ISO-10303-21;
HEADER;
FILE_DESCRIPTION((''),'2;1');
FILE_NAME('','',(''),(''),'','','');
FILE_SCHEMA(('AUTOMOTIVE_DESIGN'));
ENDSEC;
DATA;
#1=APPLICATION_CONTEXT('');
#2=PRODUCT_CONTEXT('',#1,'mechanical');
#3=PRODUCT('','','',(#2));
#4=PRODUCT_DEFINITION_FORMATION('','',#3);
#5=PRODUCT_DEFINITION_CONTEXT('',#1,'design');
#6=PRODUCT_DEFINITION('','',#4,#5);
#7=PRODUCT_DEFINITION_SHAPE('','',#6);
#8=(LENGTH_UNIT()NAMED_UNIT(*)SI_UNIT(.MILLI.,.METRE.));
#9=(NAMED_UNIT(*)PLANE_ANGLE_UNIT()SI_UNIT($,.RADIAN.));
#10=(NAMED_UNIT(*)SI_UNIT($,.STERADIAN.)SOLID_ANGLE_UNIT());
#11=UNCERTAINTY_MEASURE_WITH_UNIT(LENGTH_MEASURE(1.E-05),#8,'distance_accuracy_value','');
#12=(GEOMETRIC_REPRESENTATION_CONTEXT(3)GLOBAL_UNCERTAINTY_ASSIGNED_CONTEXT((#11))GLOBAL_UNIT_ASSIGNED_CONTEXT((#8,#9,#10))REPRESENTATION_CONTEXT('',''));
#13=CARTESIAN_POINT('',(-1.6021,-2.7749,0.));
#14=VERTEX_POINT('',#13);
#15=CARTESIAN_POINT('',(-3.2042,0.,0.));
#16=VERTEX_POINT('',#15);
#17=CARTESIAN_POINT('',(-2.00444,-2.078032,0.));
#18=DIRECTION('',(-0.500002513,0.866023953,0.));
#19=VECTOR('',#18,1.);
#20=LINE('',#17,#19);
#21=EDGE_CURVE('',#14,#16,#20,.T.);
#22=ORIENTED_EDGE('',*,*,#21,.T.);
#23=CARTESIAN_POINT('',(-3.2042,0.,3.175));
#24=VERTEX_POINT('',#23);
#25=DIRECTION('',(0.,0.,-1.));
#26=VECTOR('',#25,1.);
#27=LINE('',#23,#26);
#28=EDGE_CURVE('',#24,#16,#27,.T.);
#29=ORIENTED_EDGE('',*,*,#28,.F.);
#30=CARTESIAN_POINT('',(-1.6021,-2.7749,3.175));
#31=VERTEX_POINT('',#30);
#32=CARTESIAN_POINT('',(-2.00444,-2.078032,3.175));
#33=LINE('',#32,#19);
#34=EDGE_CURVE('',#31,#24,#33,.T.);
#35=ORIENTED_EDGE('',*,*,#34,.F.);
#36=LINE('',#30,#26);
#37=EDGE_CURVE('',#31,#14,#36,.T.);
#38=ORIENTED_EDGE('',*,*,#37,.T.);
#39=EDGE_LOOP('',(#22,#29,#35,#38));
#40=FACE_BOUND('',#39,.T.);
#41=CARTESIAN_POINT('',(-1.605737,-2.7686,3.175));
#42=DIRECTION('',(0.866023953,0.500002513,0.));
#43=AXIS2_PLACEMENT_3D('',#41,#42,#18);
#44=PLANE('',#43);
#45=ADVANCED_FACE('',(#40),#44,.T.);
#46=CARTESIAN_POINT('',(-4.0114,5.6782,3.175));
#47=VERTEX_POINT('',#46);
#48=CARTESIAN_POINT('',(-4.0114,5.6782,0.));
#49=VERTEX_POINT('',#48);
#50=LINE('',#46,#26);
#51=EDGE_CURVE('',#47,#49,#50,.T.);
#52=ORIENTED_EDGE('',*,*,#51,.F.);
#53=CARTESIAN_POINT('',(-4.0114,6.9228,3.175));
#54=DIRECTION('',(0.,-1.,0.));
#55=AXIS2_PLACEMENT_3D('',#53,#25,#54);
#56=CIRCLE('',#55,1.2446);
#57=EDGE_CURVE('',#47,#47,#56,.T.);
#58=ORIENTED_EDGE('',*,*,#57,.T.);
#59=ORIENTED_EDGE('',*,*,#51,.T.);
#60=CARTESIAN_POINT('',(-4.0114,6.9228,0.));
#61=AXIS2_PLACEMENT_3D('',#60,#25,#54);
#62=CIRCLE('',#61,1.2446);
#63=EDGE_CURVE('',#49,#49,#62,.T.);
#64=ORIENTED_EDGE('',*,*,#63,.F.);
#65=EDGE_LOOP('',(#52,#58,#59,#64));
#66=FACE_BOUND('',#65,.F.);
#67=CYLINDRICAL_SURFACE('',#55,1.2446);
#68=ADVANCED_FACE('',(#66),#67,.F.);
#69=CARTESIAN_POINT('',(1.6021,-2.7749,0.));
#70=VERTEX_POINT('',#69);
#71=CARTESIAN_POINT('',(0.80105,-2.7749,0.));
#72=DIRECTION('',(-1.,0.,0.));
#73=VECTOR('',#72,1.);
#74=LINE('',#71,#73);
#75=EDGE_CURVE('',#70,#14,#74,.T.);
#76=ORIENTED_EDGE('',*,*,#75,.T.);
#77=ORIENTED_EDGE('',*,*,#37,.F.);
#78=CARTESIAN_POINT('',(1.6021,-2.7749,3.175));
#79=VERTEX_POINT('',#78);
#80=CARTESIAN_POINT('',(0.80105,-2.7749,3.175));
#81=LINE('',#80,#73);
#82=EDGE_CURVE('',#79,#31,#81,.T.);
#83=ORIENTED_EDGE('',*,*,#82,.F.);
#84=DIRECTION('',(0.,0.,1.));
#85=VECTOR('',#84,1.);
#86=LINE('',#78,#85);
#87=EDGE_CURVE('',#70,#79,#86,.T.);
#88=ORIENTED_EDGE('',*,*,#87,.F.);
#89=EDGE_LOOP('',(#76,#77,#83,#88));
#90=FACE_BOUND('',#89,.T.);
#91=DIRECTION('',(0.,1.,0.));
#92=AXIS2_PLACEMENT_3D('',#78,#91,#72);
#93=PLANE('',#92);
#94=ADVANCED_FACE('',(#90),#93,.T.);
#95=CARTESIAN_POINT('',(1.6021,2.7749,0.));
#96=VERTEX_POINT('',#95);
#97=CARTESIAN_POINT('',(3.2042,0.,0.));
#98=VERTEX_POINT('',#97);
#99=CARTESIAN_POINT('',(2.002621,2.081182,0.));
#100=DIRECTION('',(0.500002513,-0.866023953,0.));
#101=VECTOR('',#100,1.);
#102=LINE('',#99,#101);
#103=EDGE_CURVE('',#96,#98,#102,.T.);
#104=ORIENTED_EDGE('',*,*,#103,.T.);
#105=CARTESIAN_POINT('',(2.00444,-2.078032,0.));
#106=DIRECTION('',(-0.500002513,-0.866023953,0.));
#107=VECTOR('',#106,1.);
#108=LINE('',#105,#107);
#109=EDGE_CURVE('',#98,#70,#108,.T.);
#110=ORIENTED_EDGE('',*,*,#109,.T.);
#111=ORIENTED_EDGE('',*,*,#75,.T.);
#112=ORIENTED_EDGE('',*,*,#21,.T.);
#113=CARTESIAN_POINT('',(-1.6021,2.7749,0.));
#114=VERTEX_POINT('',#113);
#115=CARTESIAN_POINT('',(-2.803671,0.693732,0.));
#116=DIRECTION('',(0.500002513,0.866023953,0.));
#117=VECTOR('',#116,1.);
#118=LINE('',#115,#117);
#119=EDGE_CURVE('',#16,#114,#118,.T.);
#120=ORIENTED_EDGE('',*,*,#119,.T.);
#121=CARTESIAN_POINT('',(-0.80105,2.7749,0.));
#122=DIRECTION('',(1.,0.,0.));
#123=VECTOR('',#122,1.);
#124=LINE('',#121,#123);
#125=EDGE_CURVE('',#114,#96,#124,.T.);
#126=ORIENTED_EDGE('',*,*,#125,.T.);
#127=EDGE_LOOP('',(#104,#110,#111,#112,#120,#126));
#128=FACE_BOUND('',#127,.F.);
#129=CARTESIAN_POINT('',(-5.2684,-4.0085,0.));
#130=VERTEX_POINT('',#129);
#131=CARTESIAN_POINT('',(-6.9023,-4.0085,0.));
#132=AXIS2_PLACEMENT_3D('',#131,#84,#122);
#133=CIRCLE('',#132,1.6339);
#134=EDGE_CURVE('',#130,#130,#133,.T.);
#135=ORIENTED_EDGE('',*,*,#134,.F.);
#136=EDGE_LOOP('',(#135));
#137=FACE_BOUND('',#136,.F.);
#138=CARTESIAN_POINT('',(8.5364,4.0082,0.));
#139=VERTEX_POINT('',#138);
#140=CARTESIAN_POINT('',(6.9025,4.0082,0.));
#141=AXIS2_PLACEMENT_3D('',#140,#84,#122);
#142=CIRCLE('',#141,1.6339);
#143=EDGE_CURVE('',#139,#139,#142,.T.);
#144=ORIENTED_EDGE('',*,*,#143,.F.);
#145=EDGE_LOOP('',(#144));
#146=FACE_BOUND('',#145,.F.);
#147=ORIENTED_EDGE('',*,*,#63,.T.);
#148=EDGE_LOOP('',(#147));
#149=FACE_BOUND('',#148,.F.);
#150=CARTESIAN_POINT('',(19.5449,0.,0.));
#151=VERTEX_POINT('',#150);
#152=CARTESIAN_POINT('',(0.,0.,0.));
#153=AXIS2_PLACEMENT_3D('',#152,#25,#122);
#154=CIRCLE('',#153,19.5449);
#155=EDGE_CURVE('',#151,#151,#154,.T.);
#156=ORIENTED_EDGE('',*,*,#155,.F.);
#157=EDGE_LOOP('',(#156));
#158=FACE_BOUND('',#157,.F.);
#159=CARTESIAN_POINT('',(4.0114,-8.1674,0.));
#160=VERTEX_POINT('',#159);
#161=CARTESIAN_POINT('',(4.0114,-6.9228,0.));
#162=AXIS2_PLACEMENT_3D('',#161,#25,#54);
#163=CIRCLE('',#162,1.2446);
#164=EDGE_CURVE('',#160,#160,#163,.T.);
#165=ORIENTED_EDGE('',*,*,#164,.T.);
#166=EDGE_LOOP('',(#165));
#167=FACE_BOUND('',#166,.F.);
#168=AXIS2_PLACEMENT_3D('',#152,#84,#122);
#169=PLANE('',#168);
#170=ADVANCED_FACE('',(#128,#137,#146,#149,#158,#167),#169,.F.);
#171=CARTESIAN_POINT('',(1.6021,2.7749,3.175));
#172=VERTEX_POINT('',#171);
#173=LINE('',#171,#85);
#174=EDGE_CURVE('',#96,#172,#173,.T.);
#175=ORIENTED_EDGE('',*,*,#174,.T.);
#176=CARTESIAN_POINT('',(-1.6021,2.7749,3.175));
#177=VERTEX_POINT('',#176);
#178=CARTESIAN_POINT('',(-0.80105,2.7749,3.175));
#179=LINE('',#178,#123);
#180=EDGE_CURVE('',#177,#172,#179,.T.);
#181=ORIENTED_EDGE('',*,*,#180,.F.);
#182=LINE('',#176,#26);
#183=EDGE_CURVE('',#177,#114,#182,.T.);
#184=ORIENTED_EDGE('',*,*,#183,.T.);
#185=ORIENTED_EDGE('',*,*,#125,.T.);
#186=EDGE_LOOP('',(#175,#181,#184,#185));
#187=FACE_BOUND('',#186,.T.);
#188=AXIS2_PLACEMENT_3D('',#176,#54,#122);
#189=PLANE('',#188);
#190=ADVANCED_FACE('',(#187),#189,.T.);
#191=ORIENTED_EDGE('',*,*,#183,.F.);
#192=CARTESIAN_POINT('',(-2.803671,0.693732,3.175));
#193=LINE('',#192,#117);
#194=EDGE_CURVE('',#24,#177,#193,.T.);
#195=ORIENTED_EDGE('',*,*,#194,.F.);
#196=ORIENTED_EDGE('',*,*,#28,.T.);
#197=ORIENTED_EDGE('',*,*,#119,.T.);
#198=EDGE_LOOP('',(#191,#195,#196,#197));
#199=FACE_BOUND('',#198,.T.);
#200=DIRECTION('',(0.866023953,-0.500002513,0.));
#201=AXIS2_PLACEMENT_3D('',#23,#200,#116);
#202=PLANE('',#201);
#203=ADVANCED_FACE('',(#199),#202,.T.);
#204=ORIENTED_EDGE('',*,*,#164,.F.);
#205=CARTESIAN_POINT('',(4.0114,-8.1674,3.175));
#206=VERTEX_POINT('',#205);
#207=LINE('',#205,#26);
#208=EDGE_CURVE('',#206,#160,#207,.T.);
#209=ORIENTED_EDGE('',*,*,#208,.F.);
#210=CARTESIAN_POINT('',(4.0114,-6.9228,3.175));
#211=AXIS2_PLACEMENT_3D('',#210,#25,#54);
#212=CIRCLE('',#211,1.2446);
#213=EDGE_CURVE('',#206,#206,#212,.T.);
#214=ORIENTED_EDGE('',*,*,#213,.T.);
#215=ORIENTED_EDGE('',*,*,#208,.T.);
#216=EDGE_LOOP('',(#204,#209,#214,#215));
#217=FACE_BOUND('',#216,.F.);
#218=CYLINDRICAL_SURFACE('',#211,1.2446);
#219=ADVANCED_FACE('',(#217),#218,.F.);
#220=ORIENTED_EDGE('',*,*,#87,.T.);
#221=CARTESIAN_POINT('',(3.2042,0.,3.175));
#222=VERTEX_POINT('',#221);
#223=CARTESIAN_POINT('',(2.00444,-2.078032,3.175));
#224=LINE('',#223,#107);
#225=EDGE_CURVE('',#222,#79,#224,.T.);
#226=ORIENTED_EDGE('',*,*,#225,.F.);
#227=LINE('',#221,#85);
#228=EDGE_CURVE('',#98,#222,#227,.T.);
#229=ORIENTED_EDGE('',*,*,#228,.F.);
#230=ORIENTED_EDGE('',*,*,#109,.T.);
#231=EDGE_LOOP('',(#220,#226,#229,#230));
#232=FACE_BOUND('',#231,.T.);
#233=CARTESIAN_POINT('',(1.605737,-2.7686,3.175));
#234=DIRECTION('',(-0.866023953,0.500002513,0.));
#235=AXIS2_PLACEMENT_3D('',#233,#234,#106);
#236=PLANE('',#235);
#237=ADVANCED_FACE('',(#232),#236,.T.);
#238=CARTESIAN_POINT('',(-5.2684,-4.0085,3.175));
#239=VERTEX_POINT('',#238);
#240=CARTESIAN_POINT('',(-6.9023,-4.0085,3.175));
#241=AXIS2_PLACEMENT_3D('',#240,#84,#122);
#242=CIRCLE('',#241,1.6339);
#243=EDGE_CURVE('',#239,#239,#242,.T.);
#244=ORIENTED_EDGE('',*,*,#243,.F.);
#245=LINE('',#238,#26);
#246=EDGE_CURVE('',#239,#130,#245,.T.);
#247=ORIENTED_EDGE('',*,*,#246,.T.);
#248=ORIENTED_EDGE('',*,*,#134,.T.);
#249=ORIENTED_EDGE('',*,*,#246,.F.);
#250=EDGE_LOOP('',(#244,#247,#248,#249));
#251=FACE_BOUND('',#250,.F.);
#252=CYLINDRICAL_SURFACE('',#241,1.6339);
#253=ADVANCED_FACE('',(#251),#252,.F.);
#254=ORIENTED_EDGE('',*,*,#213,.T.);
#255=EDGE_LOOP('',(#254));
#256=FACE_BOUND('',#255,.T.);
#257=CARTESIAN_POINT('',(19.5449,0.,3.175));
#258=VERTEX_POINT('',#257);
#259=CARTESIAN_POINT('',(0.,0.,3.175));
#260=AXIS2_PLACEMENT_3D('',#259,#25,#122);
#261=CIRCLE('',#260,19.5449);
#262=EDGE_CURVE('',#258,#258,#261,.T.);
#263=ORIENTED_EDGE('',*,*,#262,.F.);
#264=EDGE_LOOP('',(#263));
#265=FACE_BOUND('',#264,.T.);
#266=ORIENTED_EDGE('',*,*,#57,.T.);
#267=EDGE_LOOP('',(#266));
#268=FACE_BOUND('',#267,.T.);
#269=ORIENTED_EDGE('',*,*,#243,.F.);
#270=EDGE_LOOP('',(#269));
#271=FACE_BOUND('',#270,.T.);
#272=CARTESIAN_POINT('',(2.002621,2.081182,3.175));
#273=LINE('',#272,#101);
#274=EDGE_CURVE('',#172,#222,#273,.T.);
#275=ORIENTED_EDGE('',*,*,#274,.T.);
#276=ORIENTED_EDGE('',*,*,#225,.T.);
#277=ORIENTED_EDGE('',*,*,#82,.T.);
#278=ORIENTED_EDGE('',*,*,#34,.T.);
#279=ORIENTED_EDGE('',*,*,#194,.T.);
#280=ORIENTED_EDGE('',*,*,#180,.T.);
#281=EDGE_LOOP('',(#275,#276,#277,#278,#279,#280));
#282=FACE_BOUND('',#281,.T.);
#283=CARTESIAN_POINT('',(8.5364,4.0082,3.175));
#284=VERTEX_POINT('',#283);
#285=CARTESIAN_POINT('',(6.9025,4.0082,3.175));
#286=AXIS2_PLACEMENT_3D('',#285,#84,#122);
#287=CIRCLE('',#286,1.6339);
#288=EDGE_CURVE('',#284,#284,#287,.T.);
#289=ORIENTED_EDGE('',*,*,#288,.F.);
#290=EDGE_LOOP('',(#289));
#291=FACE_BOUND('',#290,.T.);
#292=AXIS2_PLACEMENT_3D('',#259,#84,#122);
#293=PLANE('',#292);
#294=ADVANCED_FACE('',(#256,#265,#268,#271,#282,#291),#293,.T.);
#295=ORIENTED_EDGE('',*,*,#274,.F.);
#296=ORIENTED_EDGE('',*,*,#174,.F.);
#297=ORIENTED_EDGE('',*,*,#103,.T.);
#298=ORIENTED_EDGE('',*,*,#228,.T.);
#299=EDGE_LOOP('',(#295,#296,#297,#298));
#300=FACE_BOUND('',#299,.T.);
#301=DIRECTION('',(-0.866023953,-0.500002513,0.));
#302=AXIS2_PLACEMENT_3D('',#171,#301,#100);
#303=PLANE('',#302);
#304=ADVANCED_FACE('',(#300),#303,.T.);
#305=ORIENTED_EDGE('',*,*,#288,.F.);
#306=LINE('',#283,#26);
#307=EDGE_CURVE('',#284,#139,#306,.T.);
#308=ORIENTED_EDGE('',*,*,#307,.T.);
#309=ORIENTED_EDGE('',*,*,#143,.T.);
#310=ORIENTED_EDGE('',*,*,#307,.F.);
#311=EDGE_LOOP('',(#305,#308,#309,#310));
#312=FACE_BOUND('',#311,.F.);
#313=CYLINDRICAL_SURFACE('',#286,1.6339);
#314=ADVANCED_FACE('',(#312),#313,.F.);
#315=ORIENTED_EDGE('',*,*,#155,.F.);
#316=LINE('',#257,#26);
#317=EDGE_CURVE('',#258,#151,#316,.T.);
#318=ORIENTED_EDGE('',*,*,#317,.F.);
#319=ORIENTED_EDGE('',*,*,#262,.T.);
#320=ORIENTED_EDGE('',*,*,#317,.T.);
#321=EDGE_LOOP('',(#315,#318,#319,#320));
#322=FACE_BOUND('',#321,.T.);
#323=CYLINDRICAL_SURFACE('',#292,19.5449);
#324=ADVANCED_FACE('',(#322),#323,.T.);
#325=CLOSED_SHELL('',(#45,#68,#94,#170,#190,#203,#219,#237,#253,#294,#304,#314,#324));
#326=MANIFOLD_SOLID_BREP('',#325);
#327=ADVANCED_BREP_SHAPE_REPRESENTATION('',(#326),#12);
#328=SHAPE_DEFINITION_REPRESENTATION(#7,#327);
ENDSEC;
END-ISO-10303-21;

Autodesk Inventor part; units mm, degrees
ref_plane "YZ Plane" through (0, 0, 0) normal (1, 0, 0) x (0, 1, 0)
ref_plane "XZ Plane" through (0, 0, 0) normal (0, 1, 0) x (-1, 0, 0)
ref_plane "XY Plane" through (0, 0, 0) normal (0, 0, 1) x (1, 0, 0)
sketch "Sketch1" plane through (0, 0, 0) normal (0, 0, 1) x (1, 0, 0)
  circle A0 centre (0, 0) radius 27.6352
  dimension "d0" = 55.2704
extrude "Extrusion1" add sketch "Sketch1" along normal blind 3.175
sketch "Sketch2" plane through (0, 0, 3.175) normal (0, 0, 1) x (1, 0, 0)
  circle A0 centre (0, 0) radius 27.6352 projected
  line L0 (0, 27.6352) -> (0, 0)
  line L1 (0, 0) -> (23.9328, -13.8176)
  line L2 (0, 0) -> (-23.9328, -13.8176)
  line L3 (0, 0) -> (27.6352, 0) construction
  line L4 (0, 27.6352) -> (0, 19.4152)
  line L5 (0, 19.4152) -> (5.08, 19.4152)
  line L6 (0, 19.4152) -> (-5.08, 19.4152)
  arc A1 (5.08, 19.4152) -> (-5.08, 19.4152) centre (0, -5.5937) ccw
  line L7 (-5.08, 19.4152) -> (2.5298, 19.4152) construction
  line L8 (-5.08, 19.4152) -> (-7.5281, 26.5901)
  line L9 (-5.08, 19.4152) -> (2.501, 19.4152) construction
  line L10 (5.08, 19.4152) -> (7.5281, 26.5901)
  line L11 (5.08, 19.4152) -> (12.661, 19.4152) construction
  line L12 (23.9328, -13.8176) -> (16.8277, -9.7155)
  line L13 (16.8277, -9.7155) -> (19.355, -5.3381)
  line L14 (16.8277, -9.7155) -> (14.3004, -14.0929)
  line L15 (16.8277, -9.7155) -> (17.2897, -9.9822)
  arc A2 (14.3004, -14.0929) -> (19.355, -5.3381) centre (-3.6819, 2.1257) ccw
  point P0 (0.3732, 19.9232)
  point P1 (0, 19.9259)
  dimension "d3" = 120
  dimension "d5" = 120
  dimension "d6" = 120
  dimension "d7" = 8.22
  dimension "d8" = 5.08
  dimension "d9" = 5.08
  dimension "d11" = 108.84
  dimension "d12" = 71.16
  dimension "d13" = 8.2042
  dimension "d14" = 5.0546
  dimension "d15" = 5.0546
  dimension "d16" = 6.16
  dimension "d17" = 0.5334
  dimension "d51" = 0.508
extrude "Extrusion2" cut sketch "Sketch2" against normal blind 3.175 contours L10 A1 L0 A0 | L0 A1 L8 A0
pattern_circular "Circular Pattern1" count 3 over 360 about axis through (0, 0, 0) along (0, 0, 1) of "Extrusion2"
sketch "Sketch4" plane through (0, 0, 3.175) normal (0, 0, 1) x (1, 0, 0)
  line L0 (-1.6129, -2.7686) -> (1.6129, -2.7686)
  line L1 (0, 2.7686) -> (0, 0)
  line L2 (0, -2.7686) -> (0, 0)
  line L3 (-1.6021, 2.7749) -> (1.6021, 2.7749)
  line L4 (1.6021, 2.7749) -> (3.2042, 0)
  line L5 (3.2042, 0) -> (1.6021, -2.7749)
  line L6 (1.6021, -2.7749) -> (-1.6021, -2.7749)
  line L7 (-1.6021, -2.7749) -> (-3.2042, 0)
  line L8 (-3.2042, 0) -> (-1.6021, 2.7749)
  line L9 (0, 0) -> (6.3283, 0)
extrude "Extrusion3" cut sketch "Sketch4" against normal blind 25.4
sketch "Sketch5" plane through (0, 0, 3.175) normal (0, 0, 1) x (1, 0, 0)
  line L0 (0, 0) -> (-11.9711, 20.5846)
  line L1 (-5.08, 19.4152) -> (-7.5281, 26.5901) projected
  circle A0 centre (-11.9711, 20.5846) radius 2.159
  line L2 (0, 0) -> (11.8412, 20.6596)
  line L3 (7.5281, 26.5901) -> (5.08, 19.4152) projected
  circle A1 centre (11.8412, 20.6596) radius 2.159
  line L4 (0, 0) -> (23.8124, 0.075)
  line L5 (19.3541, -5.3082) -> (26.7917, -6.7755) projected
  circle A2 centre (23.8124, 0.075) radius 2.159
  line L6 (0, 0) -> (11.9959, -20.5702)
  line L7 (19.2636, -19.8146) -> (14.2741, -14.107) projected
  circle A3 centre (11.9959, -20.5702) radius 2.159
  line L8 (0, 0) -> (-11.8291, -20.6666)
  line L9 (-14.2741, -14.107) -> (-19.2636, -19.8146) projected
  circle A4 centre (-11.8291, -20.6666) radius 2.159
  line L10 (-19.3541, -5.3082) -> (-26.7917, -6.7755) projected
  line L11 (0, 0) -> (-23.7488, -0.1036)
  line L12 (0, 0) -> (23.749, 0) construction
  dimension "d52" = 23.8125
  dimension "d54" = 4.318
  dimension "d55" = 23.8125
  dimension "d57" = 4.318
  dimension "d58" = 23.8125
  dimension "d60" = 4.318
  dimension "d61" = 23.8125
  dimension "d63" = 4.318
  dimension "d64" = 23.8125
  dimension "d66" = 4.318
  dimension "d69" = 23.8125
  dimension "d70" = 23.8252
  dimension "d82" = 5.969
  dimension "d86" = 59.931
  dimension "d88" = 23.749
  dimension "d89" = 180.25
extrude "Extrusion4" cut sketch "Sketch5" against normal blind 25.4
hole "Hole2" at (-23.7488, -0.1036, 3.175) direction (0, 0, -1) diameter 4.318 depth 25.4 tip angle 118
sketch "Sketch7" plane through (0, 0, 3.175) normal (0, 0, 1) x (1, 0, 0)
  line L0 (1.6021, 2.7749) -> (3.2042, 0) projected
  line L1 (2.4031, 1.3874) -> (6.9025, 4.0082)
  line L2 (2.4031, 1.3874) -> (7.6101, 1.3874) construction
  circle A0 centre (6.9025, 4.0082) radius 1.6339
  point P0 (0, 0)
  dimension "d105" = 5.207
  dimension "d106" = 30.22
  dimension "d107" = 3.2677
extrude "Extrusion5" cut sketch "Sketch7" against normal blind 25.4
sketch "Sketch8" plane through (0, 0, 3.175) normal (0, 0, 1) x (1, 0, 0)
  line L0 (-3.2042, 0) -> (-1.6021, -2.7749) projected
  line L1 (-2.4031, -1.3874) -> (-6.9023, -4.0085)
  circle A0 centre (-6.9023, -4.0085) radius 1.6339
  point P0 (0, 0)
  dimension "d112" = 5.207
  dimension "d113" = 3.2677
extrude "Extrusion6" cut sketch "Sketch8" against normal blind 25.4
thicken "Thicken1" operation add thickness 0.635 both sides no extend neighbours yes toward (-0.946424, -0.3229265, 0) faces at (-6.7121, 24.1984, 1.0583)
thicken "Thicken2" operation add thickness 0.635 both sides no extend neighbours yes toward (0.946424, -0.3229265, 0) faces at (5.896, 21.8068, 2.1167)
thicken "Thicken3" operation add thickness 0.635 both sides no extend neighbours yes toward (0.1935495, 0.9810905, 0) faces at (24.3125, -6.2864, 2.1167)
thicken "Thicken4" operation add thickness 0.635 both sides no extend neighbours yes toward (-0.7528746, -0.658164, 0) faces at (17.6004, -17.9121, 1.0583)
thicken "Thicken5" operation add thickness 0.635 both sides no extend neighbours yes toward (-0.1935495, 0.9810905, 0) faces at (-24.3125, -6.2864, 1.0583)
thicken "Thicken6" operation add thickness 0.635 both sides no extend neighbours yes toward (0.7528746, -0.658164, 0) faces at (-17.6004, -17.9121, 2.1167)
thicken "Thicken7" operation add thickness 0.381 both sides no extend neighbours yes toward (0.1744546, -0.9846652, 0) faces at (-4.452, 19.5346, 2.1167)
thicken "Thicken8" operation add thickness 0.381 both sides no extend neighbours yes toward (-0.9217033, 0.3878957, 0) faces at (18.6772, -7.1021, 1.0583)
thicken "Thicken9" operation add thickness 0.381 both sides no extend neighbours yes toward (0.7655178, 0.6434147, 0) faces at (-14.6914, -13.6229, 2.1167)
sketch "Sketch14" plane through (0, 0, 3.175) normal (0, 0, 1) x (1, 0, 0)
  line L0 (0, 0) -> (-4.0114, 6.9228)
  line L1 (0, 0) -> (8.001, 0) construction
  line L2 (0, 0) -> (4.0114, -6.9228)
  line L3 (0, 0) -> (8.001, 0) construction
  dimension "d170" = 8.001
  dimension "d171" = 120.09
  dimension "d172" = 8.001
  dimension "d173" = 59.91
hole "Hole5" at (-4.0114, 6.9228, 3.175) at (4.0114, -6.9228, 3.175) direction (0, 0, -1) diameter 2.4892 depth 9.525 tip angle 118
sketch "Sketch15" plane through (0, 0, 3.175) normal (0, 0, 1) x (1, 0, 0)
  circle A0 centre (0, 0) radius 19.5449
sketch "Sketch16" plane through (0, 0, 3.175) normal (0, 0, 1) x (1, 0, 0)
  circle A0 centre (0, 0) radius 27.6352
  circle A1 centre (0, 0) radius 19.5449 projected
  arc A2 (-8.1376, 26.4099) -> (-26.9405, -6.1576) centre (0, 0) ccw projected
  arc A3 (26.9405, -6.1576) -> (8.1376, 26.4099) centre (0, 0) ccw projected
  arc A4 (-18.8029, -20.2523) -> (18.8029, -20.2523) centre (0, 0) ccw projected
  arc A5 (13.5925, -14.2922) -> (19.1737, -4.6254) centre (-4.8443, 2.7969) ccw projected
  arc A6 (-19.1737, -4.6254) -> (-13.5925, -14.2922) centre (4.8443, 2.7969) ccw projected
  arc A7 (5.5811, 18.9176) -> (-5.5811, 18.9176) centre (0, -5.5937) ccw projected
extrude "Extrusion9" cut sketch "Sketch16" against normal blind 25.4
equation "\"d55\" = d52"
equation "\"d58\" = d52"
equation "\"d61\" = d52"
equation "\"d64\" = d52"
equation "\"d69\" = d52"
properties part number "NewMechanumWheelHub"
